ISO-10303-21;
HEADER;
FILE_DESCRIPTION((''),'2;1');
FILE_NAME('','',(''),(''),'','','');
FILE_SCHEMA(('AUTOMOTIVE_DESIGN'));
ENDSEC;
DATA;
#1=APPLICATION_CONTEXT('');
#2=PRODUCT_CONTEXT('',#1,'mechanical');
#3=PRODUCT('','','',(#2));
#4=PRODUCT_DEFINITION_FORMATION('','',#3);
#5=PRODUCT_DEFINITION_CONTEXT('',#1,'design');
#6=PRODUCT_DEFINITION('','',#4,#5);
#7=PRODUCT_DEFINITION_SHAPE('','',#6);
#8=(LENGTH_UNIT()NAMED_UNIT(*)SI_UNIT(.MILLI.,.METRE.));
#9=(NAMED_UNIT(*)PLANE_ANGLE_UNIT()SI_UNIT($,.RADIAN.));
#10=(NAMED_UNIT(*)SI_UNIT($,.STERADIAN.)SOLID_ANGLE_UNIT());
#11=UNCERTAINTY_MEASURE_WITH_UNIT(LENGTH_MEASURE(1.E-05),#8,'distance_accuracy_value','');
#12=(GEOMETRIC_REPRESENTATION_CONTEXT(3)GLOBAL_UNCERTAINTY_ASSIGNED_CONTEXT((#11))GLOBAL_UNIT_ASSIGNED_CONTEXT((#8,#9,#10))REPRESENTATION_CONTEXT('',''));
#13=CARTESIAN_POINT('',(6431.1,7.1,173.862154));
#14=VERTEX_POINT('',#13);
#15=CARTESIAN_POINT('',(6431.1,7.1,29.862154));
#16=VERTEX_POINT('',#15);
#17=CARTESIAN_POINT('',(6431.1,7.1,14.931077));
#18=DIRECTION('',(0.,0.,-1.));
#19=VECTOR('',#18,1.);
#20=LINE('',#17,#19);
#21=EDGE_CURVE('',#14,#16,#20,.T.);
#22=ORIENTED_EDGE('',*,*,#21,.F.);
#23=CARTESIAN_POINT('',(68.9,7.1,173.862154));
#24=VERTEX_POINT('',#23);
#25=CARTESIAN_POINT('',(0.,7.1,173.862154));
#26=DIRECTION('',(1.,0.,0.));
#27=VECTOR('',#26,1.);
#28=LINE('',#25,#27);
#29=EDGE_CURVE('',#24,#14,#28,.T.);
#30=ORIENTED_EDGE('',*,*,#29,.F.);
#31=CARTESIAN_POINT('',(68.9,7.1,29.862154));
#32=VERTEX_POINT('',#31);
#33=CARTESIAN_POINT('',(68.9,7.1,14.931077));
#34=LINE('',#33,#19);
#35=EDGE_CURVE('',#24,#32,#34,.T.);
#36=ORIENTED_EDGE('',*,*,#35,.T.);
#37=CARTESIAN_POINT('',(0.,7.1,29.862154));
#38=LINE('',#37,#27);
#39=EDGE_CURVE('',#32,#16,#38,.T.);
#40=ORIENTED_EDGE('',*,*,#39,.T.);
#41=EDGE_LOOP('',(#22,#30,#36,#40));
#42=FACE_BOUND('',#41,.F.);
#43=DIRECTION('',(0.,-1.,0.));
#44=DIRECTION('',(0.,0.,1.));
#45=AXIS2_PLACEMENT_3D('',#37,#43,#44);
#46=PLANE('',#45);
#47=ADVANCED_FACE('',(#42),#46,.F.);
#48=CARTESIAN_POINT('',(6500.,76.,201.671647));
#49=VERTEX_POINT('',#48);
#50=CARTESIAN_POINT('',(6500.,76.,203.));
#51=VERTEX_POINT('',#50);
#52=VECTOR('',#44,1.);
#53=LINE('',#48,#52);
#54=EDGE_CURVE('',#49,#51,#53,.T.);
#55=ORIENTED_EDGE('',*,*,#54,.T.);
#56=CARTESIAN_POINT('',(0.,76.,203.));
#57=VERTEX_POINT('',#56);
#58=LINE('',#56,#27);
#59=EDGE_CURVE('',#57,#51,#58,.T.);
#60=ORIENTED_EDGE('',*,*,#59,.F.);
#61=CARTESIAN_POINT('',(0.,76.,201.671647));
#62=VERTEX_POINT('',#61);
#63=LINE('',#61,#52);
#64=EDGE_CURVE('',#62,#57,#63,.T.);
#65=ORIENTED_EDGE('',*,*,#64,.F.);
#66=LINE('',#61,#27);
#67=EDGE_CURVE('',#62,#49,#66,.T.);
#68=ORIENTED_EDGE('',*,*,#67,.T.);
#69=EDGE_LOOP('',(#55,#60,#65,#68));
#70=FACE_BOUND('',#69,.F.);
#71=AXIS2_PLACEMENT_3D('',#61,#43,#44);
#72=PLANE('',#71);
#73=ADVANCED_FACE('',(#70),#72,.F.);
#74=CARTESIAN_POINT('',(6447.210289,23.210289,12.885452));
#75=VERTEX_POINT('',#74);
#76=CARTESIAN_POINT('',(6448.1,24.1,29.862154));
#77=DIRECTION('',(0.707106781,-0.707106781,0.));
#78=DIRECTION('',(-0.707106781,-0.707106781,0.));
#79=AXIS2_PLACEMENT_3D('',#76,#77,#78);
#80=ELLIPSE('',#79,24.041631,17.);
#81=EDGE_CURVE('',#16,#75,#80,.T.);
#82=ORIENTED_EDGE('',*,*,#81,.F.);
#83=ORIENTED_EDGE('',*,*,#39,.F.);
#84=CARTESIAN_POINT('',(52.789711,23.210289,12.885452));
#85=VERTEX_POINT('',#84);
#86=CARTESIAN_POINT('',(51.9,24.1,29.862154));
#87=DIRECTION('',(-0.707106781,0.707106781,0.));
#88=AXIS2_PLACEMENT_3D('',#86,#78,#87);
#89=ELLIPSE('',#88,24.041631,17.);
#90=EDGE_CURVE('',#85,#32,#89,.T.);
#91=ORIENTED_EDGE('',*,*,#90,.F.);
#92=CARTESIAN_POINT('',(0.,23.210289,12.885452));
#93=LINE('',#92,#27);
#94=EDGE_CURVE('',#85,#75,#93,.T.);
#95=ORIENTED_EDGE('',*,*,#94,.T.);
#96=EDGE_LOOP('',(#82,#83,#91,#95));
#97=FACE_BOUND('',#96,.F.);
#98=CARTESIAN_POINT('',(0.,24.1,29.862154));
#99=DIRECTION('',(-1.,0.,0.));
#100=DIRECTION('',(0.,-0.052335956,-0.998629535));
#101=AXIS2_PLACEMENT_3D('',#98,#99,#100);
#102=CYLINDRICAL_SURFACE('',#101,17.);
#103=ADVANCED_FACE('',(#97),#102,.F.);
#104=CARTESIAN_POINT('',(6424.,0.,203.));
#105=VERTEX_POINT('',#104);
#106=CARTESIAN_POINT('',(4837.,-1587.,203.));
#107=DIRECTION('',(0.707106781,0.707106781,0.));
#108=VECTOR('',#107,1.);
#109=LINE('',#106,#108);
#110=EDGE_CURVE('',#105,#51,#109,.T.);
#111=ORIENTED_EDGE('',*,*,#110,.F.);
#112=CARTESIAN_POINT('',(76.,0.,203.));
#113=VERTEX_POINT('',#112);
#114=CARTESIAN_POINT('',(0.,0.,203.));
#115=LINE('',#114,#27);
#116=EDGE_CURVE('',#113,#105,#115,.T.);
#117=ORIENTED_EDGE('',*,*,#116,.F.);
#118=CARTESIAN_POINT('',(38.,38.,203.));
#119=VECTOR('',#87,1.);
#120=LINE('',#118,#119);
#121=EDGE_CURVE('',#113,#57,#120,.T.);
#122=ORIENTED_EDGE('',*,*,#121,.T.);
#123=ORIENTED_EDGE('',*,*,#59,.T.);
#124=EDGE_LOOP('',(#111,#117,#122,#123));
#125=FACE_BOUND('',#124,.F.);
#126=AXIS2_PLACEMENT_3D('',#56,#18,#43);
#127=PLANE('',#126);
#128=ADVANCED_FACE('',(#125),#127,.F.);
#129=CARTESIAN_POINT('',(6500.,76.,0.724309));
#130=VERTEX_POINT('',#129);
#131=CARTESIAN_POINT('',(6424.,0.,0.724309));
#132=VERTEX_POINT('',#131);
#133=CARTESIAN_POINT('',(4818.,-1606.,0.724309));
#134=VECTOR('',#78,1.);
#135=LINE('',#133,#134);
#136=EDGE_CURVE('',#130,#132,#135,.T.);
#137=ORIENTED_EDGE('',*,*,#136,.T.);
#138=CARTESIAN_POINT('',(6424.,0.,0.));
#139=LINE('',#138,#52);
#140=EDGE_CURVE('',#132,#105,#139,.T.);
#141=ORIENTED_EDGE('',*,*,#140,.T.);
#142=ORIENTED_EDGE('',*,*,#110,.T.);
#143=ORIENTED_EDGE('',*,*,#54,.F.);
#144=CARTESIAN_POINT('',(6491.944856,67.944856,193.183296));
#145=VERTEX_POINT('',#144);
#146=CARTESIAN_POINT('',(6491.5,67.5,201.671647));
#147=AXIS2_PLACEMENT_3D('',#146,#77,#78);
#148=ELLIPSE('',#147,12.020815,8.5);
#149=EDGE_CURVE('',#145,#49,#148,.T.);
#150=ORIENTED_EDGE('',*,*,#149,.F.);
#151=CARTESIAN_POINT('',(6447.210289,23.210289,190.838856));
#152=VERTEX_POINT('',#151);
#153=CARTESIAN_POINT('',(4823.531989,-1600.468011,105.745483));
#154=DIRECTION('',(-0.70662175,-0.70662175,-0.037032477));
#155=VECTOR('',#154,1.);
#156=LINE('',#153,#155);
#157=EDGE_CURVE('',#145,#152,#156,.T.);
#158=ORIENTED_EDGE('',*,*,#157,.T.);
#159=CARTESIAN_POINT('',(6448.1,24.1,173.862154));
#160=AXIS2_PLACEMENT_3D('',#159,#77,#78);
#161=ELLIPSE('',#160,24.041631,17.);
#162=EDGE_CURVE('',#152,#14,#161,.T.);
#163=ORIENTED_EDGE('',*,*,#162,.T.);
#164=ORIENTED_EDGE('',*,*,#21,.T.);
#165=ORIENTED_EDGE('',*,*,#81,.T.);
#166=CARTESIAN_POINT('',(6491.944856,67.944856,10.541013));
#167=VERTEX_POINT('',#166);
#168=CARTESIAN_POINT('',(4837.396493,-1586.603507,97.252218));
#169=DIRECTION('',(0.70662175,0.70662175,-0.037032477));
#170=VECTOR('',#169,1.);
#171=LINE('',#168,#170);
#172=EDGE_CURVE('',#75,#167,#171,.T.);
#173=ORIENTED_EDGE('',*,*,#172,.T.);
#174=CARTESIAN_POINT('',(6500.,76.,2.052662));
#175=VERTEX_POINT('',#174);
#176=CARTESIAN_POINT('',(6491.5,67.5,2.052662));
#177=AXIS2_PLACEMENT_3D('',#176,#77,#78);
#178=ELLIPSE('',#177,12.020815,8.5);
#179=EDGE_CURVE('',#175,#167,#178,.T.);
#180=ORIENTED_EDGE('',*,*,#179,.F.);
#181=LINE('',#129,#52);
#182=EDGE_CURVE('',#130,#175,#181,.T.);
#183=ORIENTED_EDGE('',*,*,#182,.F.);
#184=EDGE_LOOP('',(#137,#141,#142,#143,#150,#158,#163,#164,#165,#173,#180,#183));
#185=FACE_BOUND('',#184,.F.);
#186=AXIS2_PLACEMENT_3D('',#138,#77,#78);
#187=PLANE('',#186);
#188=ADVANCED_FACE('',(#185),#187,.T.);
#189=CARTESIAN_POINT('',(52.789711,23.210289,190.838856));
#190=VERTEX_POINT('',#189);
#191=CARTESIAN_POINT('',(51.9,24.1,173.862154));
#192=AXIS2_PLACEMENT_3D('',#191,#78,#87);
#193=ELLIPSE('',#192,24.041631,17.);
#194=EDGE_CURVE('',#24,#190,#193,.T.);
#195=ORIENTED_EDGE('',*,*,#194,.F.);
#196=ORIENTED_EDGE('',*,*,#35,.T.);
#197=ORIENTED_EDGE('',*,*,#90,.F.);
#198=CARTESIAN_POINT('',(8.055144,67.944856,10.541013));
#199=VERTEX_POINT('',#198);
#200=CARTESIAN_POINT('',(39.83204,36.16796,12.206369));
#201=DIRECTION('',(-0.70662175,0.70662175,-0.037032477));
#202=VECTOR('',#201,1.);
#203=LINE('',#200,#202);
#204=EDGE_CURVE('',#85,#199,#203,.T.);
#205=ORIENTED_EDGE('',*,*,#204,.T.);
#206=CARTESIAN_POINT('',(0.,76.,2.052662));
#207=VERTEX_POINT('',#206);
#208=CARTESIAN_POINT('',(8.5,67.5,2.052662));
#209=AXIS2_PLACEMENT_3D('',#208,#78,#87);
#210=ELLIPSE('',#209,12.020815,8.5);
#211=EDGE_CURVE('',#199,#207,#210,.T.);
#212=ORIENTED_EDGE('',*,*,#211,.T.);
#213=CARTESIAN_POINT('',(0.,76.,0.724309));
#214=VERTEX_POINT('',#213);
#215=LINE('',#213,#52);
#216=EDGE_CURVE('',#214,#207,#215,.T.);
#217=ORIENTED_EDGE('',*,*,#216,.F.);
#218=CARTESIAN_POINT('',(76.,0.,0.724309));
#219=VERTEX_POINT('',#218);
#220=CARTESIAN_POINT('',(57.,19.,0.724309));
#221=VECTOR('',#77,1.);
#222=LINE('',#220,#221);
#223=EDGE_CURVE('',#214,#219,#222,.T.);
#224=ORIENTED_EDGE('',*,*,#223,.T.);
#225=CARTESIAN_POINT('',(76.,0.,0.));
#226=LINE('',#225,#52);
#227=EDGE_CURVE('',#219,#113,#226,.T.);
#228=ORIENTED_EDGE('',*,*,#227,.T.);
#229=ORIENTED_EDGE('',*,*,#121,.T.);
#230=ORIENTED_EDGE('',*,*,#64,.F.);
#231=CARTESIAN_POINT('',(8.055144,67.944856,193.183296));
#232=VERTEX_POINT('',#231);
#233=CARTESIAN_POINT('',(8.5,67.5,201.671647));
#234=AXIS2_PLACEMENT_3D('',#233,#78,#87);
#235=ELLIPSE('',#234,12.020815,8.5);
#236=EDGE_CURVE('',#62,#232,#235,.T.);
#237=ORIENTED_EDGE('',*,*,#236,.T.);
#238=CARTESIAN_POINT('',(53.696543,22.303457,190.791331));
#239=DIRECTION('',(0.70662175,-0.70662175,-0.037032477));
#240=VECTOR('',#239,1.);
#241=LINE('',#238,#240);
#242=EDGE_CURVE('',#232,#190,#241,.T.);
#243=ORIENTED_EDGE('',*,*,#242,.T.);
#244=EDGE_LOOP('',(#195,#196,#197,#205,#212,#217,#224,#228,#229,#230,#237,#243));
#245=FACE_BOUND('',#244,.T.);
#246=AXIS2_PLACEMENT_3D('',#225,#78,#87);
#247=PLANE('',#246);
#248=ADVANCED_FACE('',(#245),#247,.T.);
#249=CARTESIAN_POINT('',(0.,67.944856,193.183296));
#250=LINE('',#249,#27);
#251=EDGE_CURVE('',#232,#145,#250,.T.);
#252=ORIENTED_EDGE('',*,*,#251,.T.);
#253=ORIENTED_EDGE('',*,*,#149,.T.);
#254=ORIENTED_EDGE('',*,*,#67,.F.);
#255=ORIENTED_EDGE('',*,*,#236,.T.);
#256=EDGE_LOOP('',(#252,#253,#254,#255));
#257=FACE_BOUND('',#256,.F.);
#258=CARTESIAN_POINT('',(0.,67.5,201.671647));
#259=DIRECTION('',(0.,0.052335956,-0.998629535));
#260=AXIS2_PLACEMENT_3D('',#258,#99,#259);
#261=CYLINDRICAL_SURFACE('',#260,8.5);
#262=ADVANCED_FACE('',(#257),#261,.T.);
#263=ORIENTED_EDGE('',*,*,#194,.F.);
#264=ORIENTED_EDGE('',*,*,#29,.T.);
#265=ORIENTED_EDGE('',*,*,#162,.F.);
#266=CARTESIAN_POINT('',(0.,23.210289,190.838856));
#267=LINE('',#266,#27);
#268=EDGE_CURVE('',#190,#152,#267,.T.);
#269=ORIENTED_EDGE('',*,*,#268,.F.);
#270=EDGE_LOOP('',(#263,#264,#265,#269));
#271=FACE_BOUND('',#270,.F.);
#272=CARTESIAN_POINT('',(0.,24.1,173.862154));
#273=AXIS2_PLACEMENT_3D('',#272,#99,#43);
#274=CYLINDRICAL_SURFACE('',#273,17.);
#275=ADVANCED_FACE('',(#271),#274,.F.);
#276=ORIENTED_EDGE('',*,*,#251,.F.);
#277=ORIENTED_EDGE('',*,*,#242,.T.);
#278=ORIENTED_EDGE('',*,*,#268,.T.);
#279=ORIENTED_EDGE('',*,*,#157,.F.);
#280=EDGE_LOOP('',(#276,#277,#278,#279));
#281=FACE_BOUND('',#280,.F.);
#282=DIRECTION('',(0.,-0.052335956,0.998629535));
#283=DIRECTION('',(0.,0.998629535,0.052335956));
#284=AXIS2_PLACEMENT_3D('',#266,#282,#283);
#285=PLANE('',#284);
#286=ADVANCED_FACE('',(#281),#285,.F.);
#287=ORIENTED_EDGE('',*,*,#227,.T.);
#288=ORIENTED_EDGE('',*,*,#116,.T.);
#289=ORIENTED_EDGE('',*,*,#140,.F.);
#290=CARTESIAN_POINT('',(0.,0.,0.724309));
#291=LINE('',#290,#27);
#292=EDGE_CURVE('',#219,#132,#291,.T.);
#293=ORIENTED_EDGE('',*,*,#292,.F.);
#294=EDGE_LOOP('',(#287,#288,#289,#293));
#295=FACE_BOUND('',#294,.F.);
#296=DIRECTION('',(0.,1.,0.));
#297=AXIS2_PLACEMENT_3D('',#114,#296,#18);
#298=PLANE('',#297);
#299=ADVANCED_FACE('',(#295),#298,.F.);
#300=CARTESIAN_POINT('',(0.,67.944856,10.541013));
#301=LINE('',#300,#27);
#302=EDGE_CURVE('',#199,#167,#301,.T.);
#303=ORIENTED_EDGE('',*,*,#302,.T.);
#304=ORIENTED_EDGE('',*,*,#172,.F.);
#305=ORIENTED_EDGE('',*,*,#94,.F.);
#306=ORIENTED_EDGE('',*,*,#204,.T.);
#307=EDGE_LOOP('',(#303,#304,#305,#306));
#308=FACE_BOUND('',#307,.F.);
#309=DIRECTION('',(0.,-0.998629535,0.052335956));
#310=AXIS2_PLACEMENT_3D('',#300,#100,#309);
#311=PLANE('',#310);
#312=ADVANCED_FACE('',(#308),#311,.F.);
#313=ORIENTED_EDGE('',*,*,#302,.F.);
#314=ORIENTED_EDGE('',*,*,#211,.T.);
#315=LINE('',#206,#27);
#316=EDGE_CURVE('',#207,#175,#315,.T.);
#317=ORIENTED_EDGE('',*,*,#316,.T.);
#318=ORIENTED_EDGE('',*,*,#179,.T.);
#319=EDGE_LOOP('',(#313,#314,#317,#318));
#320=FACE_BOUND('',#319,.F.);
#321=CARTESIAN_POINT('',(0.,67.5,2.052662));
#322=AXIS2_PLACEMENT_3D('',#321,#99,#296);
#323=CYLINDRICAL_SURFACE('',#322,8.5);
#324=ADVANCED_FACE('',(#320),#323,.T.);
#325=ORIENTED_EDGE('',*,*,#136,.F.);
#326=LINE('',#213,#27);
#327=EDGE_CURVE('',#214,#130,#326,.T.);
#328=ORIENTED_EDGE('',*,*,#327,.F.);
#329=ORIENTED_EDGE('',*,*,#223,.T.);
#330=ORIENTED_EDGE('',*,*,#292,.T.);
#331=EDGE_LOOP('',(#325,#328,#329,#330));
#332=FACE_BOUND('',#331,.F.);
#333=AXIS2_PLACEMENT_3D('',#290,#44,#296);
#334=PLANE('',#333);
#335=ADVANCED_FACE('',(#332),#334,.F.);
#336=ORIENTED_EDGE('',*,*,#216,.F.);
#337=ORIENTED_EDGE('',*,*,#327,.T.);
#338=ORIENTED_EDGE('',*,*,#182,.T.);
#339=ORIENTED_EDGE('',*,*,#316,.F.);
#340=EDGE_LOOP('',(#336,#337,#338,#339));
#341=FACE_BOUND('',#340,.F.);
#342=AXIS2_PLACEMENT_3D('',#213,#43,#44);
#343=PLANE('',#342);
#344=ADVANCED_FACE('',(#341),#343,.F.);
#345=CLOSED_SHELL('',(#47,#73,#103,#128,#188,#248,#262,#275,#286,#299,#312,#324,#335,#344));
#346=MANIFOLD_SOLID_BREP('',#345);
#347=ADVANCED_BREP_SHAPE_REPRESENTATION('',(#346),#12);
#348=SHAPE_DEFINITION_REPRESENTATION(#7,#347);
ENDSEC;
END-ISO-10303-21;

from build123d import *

# Parameters (mm, degrees)
F1_DEPTH = 6500
F3_DEPTH = 203.001


# Not quite as in the source:
# - a pattern or mirror of a feature is missing from the dataset's text; its kind, count and spacing are read off the source's solid


with BuildPart() as f1:
    # F0 (on Right) → F1 (new body)
    with BuildSketch(Plane.YZ):
        with BuildLine():
            Line((0, 203), (0, 0.7243087391))
            Line((0, 0.7243087391), (76, 0.7243087391))
            Line((76, 0.7243087391), (76, 2.0526619257))
            ThreePointArc((76, 2.0526619257), (73.6656821536, 7.9036758191), (67.9448556281, 10.5410129711))
            Line((67.9448556281, 10.5410129711), (23.2102887439, 12.8854522787))
            ThreePointArc((23.2102887439, 12.8854522787), (11.7686356928, 18.1601265828), (7.1, 29.8621543695))
            Line((7.1, 29.8621543695), (7.1, 173.8621543695))
            ThreePointArc((7.1, 173.8621543695), (11.7686356928, 185.5641821563), (23.2102887439, 190.8388564604))
            Line((23.2102887439, 190.8388564604), (67.9448556281, 193.183295768))
            ThreePointArc((67.9448556281, 193.183295768), (73.6656821536, 195.82063292), (76, 201.6716468134))
            Line((76, 201.6716468134), (76, 203))
            Line((76, 203), (0, 203))
        make_face()
    extrude(amount=F1_DEPTH)

    # F2 (on Top) → F3 (cut, through all)
    with BuildSketch(Plane.XY):
        Polygon((0, 76), (0, 0), (76, 0), align=None)
    f3 = extrude(amount=F3_DEPTH, mode=Mode.SUBTRACT)

    # F3_copies: F3 across plane
    add(f3.mirror(Plane(origin=(3250, 0, 0), x_dir=(0, 0, 1), z_dir=(1, 0, 0))), mode=Mode.SUBTRACT)


solid = f1.part
